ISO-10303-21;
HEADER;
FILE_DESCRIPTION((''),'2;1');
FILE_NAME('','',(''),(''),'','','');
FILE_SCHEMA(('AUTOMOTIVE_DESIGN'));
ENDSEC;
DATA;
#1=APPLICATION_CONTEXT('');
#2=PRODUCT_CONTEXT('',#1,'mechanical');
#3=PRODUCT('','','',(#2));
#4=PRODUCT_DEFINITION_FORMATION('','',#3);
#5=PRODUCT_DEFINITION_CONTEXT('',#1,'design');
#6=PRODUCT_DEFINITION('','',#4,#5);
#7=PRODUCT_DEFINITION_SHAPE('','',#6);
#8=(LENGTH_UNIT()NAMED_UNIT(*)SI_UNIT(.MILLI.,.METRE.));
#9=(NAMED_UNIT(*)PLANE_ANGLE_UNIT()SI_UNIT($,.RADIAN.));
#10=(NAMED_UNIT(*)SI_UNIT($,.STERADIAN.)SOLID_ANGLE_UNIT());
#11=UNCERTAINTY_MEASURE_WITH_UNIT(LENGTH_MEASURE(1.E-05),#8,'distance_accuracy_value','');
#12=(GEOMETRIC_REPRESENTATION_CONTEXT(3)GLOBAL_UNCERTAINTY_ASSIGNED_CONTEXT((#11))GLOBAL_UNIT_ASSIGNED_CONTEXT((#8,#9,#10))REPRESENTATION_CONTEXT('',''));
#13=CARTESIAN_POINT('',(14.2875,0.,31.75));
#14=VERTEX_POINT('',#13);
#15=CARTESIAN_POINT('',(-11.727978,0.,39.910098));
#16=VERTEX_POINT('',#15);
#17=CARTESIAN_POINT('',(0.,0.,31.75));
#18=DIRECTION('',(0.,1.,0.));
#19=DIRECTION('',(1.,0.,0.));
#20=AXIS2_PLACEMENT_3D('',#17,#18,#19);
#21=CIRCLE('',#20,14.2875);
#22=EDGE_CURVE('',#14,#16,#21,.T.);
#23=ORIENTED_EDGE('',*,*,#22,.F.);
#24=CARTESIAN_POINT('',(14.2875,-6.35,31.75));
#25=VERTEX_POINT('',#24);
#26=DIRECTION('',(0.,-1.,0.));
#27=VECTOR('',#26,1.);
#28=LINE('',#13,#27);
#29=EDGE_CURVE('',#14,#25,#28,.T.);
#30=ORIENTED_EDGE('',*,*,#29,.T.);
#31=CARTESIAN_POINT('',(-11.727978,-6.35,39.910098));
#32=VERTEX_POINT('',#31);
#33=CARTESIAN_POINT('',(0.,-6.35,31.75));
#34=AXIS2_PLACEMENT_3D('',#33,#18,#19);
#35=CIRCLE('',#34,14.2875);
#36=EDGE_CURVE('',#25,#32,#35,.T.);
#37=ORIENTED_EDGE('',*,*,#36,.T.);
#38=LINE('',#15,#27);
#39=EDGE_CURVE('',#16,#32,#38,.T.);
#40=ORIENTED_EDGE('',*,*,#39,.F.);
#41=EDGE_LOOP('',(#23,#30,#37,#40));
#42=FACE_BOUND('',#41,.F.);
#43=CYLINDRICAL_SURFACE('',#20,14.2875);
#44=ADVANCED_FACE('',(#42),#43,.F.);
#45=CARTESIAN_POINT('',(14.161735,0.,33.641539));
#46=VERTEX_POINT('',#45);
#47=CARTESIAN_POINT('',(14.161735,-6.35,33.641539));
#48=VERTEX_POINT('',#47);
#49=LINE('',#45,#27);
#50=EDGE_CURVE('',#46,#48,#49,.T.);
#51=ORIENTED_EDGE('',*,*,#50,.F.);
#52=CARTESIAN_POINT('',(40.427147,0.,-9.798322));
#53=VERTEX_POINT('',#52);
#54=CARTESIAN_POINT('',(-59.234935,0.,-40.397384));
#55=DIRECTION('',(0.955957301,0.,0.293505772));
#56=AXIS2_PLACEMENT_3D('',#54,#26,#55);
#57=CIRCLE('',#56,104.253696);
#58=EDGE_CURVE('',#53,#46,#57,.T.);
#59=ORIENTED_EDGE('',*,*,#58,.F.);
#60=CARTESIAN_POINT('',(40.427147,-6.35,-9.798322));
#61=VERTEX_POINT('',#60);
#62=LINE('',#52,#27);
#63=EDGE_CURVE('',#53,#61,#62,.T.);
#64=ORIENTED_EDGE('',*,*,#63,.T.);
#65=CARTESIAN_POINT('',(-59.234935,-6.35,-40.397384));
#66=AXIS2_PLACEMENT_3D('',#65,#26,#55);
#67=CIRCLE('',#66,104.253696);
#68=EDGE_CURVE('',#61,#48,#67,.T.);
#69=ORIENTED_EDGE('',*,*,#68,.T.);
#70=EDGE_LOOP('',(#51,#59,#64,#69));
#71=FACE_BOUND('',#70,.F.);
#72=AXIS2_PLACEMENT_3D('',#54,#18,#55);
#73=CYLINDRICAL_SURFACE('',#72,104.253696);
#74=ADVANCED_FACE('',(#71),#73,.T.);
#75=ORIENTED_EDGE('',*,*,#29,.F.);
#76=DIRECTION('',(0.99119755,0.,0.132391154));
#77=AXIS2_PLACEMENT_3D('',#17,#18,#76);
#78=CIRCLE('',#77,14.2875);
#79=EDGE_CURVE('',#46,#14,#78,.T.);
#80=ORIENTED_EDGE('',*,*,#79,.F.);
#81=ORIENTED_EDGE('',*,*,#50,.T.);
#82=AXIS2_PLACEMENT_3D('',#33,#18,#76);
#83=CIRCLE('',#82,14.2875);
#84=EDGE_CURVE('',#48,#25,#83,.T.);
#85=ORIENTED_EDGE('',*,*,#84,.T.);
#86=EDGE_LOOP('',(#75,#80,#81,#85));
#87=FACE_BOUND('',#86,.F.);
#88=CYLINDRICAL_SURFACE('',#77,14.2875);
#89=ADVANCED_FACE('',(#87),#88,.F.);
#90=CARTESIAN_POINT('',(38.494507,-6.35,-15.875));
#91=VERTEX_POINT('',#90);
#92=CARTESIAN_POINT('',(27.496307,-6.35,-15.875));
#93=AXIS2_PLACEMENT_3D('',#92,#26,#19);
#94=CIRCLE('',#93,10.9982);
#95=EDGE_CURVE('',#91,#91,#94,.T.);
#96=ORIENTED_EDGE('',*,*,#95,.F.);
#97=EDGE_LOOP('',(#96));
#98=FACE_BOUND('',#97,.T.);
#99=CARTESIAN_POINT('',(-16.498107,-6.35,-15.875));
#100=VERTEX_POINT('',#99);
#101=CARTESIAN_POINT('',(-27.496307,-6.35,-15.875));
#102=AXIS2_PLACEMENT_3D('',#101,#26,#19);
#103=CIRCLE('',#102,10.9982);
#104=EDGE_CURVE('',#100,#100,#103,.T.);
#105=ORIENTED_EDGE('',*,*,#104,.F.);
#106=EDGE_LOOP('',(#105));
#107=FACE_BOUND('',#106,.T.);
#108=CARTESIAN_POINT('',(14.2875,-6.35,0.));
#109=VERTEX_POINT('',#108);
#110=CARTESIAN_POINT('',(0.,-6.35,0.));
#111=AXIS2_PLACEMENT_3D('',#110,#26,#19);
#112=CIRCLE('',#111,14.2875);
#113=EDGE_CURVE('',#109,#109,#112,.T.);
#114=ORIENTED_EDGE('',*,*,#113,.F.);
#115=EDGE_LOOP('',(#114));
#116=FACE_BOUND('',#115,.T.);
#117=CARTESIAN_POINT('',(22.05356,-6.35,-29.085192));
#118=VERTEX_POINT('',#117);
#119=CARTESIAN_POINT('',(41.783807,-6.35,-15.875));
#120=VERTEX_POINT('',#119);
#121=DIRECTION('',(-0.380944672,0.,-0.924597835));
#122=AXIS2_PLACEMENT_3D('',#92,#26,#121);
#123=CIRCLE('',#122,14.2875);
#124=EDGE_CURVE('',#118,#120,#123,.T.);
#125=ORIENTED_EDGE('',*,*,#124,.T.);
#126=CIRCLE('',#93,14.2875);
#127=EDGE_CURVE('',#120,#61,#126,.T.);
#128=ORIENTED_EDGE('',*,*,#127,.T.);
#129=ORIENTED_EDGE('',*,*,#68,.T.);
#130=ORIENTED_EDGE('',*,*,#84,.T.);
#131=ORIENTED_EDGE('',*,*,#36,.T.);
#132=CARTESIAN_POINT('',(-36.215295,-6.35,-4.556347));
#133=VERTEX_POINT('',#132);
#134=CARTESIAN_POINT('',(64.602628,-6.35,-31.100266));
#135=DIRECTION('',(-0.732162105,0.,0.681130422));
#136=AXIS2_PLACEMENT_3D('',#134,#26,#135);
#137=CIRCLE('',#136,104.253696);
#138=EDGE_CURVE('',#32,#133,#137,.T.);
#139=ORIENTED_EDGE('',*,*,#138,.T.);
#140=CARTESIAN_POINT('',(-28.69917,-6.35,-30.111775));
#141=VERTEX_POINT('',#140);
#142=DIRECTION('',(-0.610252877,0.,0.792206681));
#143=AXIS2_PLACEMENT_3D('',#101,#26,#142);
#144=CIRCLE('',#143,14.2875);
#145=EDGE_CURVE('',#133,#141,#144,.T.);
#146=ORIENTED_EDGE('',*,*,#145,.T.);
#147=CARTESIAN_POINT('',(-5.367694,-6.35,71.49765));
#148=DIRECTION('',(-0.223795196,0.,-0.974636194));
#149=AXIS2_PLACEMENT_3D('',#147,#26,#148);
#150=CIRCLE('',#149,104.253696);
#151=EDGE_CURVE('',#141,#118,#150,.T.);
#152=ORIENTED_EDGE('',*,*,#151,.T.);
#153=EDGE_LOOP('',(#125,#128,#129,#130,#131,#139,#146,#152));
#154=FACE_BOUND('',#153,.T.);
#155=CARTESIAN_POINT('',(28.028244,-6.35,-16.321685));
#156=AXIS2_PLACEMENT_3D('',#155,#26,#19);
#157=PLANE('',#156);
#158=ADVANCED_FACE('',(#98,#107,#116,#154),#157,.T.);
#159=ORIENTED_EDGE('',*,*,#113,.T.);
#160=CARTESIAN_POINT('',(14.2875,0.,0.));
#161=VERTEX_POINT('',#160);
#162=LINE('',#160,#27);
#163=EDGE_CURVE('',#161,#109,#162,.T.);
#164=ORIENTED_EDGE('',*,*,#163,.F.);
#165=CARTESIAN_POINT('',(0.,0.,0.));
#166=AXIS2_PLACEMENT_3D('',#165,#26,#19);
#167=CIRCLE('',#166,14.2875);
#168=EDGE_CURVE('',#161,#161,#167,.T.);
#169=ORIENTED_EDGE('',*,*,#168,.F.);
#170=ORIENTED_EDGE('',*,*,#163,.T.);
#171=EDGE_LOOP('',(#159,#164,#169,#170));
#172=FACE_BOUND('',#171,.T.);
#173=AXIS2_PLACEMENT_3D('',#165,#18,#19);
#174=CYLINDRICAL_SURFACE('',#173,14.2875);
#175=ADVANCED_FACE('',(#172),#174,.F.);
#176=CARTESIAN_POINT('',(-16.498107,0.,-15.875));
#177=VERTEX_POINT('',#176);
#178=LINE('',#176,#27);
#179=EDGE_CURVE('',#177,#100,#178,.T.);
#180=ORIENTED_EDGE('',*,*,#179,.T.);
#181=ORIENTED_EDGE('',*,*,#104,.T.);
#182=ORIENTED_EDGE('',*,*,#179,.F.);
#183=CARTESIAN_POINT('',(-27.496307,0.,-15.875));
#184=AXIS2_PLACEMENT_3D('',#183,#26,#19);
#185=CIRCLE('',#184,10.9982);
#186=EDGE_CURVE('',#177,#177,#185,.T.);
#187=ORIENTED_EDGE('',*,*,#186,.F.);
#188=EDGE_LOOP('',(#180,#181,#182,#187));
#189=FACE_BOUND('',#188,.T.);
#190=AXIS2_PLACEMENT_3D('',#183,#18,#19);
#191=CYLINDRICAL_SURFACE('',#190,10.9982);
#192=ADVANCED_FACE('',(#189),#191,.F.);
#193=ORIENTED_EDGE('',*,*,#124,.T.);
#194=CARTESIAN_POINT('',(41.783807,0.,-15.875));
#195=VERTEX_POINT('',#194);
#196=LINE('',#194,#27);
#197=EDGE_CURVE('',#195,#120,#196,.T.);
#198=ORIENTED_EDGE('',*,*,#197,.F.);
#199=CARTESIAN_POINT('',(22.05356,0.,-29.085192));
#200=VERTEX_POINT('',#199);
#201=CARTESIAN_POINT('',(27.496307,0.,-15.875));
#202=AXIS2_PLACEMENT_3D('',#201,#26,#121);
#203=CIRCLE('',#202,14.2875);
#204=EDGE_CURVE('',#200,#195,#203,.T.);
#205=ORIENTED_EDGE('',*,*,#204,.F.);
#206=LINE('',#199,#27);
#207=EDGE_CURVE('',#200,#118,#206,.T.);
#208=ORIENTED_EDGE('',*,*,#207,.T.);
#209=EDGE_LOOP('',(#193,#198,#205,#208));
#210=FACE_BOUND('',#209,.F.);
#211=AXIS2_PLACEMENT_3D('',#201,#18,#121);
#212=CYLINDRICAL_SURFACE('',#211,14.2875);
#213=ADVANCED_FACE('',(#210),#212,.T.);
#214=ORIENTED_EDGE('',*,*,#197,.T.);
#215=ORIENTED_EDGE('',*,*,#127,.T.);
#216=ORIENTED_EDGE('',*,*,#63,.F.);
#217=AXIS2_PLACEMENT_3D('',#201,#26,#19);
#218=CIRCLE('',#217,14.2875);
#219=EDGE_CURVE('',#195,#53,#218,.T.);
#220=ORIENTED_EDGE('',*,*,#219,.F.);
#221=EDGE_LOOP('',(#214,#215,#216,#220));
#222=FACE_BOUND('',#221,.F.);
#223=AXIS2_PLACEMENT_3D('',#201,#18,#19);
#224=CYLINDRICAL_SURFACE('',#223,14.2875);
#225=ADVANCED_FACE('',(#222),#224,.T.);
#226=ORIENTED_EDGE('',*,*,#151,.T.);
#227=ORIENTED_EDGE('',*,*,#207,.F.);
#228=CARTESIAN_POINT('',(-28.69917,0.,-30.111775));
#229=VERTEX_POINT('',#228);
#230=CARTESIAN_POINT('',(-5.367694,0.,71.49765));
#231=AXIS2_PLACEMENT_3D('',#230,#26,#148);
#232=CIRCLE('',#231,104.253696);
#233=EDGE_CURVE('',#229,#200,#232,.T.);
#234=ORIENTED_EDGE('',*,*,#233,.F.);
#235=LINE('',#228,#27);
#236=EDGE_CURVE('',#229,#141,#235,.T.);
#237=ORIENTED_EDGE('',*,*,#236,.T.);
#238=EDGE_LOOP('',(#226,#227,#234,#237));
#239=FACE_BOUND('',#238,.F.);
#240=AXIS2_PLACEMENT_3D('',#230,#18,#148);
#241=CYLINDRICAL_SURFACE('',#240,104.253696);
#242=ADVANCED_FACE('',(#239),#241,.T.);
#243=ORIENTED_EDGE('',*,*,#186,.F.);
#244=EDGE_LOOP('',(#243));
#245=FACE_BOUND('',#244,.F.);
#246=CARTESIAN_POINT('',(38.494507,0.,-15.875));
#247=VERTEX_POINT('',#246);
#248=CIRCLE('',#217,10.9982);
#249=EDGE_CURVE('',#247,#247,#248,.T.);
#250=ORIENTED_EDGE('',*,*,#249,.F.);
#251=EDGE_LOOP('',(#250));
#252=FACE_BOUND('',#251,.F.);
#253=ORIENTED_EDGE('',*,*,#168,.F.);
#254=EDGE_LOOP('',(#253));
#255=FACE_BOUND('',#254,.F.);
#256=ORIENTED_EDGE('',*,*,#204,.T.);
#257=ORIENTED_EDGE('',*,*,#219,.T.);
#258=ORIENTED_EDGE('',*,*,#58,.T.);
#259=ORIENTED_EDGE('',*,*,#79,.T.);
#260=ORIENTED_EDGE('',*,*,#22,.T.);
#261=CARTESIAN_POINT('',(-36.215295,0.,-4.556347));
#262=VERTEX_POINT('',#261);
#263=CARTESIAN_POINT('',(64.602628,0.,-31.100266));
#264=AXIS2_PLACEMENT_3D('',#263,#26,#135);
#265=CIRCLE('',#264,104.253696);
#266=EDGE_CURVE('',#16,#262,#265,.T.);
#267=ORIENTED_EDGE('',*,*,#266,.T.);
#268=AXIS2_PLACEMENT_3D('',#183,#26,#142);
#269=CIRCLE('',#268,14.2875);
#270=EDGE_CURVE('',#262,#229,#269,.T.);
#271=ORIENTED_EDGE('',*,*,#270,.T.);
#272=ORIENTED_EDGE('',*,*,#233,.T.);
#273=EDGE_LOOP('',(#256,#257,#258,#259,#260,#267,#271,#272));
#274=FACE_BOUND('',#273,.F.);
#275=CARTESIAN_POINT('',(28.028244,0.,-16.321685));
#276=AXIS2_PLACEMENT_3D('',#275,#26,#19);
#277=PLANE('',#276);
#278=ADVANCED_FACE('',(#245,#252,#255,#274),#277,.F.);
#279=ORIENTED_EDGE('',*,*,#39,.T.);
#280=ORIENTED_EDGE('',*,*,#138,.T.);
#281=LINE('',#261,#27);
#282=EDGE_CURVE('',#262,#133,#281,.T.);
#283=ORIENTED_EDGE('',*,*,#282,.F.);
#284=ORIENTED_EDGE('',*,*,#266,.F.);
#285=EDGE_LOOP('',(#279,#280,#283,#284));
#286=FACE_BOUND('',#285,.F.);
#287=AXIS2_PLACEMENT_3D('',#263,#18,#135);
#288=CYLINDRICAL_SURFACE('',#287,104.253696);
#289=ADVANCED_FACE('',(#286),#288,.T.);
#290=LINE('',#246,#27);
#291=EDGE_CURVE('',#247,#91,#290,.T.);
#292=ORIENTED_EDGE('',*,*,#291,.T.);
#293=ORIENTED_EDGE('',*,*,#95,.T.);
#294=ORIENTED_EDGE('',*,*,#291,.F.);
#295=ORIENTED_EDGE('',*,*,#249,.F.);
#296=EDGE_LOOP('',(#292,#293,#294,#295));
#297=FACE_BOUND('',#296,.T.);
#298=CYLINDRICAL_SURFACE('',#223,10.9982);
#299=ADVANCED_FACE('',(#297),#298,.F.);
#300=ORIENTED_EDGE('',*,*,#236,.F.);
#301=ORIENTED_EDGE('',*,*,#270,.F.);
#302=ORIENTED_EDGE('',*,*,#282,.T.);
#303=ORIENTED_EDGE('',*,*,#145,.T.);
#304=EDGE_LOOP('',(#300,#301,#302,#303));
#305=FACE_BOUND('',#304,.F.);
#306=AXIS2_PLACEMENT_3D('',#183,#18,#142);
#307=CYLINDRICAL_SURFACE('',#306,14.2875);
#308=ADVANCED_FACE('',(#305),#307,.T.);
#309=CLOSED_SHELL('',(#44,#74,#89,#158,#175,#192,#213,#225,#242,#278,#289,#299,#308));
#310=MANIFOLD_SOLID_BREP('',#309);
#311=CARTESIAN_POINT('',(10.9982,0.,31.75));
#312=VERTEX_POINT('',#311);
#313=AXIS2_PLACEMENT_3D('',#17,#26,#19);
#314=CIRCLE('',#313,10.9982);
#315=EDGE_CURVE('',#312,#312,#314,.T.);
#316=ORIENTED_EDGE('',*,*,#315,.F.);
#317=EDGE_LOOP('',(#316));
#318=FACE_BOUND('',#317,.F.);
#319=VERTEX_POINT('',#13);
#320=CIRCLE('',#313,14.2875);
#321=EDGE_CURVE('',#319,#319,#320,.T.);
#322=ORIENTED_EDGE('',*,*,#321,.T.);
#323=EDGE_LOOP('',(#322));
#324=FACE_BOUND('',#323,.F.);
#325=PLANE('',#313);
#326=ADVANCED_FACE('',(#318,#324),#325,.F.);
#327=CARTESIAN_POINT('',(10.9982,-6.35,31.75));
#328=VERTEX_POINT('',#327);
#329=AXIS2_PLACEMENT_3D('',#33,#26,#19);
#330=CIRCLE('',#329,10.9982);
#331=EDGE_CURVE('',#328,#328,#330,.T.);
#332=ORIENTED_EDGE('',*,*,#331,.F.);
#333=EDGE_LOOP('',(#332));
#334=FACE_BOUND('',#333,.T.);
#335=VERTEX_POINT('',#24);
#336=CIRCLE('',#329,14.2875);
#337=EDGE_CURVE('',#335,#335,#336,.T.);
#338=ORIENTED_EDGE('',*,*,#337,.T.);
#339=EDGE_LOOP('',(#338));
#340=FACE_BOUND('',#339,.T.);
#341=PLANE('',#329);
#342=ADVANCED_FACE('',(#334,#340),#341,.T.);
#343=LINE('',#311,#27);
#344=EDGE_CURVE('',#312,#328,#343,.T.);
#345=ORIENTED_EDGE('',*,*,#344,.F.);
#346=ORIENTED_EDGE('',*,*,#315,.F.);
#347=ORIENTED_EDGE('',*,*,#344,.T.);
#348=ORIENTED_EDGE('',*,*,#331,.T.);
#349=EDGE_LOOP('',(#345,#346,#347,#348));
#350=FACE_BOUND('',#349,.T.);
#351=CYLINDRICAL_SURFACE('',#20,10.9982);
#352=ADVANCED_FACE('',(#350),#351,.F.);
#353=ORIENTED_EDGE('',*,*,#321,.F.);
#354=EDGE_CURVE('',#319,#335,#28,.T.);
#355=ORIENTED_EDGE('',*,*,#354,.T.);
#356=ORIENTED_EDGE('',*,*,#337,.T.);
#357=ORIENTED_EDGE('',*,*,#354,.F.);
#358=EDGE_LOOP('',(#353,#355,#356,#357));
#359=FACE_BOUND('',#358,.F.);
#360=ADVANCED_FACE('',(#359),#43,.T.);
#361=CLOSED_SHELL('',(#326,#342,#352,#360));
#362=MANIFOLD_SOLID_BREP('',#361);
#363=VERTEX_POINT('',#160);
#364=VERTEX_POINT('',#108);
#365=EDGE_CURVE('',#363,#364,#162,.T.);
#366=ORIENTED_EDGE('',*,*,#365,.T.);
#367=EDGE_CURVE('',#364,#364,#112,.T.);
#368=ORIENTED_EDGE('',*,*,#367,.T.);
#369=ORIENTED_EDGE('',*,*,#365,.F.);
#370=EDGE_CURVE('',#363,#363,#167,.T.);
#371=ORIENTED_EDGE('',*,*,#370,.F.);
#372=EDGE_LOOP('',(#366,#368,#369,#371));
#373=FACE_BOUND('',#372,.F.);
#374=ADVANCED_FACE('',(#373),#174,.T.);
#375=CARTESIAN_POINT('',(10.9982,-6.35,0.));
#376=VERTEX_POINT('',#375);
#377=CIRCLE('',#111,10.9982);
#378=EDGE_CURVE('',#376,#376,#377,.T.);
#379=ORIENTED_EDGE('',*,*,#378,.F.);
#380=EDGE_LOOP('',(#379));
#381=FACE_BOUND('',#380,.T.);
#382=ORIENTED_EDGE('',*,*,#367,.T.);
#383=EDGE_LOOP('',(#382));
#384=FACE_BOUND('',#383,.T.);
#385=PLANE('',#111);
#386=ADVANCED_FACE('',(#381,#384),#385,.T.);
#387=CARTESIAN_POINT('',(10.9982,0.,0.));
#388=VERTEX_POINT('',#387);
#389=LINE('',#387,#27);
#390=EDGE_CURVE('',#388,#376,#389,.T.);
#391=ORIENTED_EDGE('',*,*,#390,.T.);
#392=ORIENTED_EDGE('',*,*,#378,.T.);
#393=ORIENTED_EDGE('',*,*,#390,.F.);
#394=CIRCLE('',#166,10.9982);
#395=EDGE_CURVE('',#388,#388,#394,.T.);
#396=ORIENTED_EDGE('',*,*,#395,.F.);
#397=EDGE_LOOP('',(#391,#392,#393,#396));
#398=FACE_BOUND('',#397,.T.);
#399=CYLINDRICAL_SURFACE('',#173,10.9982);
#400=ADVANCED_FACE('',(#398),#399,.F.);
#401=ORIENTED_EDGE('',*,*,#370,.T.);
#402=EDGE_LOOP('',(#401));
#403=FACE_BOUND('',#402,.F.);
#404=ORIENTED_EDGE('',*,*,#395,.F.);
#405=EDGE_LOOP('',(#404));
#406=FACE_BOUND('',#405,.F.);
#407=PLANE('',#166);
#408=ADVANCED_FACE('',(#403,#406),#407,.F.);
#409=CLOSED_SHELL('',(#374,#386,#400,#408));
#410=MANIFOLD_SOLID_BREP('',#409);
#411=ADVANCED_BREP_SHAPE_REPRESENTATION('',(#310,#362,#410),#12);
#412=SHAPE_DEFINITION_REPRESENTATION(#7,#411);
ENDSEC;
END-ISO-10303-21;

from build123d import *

# Parameters (mm, degrees)
F0_R     = 14.2875
F0_R_2   = 10.9982
F2_DEPTH = 6.35
F1_R     = 10.9982
F1_R_2   = 14.2875


with BuildPart() as f2:
    # F0 (on Front) → F2 (new body)
    with BuildSketch(Plane.XZ):
        with Locations((0, 31.75)):
            Circle(F0_R)
        with Locations((0, 31.75)):
            Circle(F0_R_2, mode=Mode.SUBTRACT)
    extrude(amount=F2_DEPTH)


with BuildPart() as f2b:
    # F0 (on Front) → F2, piece 2 (new body)
    with BuildSketch(Plane.XZ):
        Circle(F0_R)
        Circle(F0_R_2, mode=Mode.SUBTRACT)
    extrude(amount=F2_DEPTH)


with BuildPart() as f2c:
    # F1 (on face) → F2, piece 3 (new body)
    with BuildSketch(Plane.XZ):
        with BuildLine():
            ThreePointArc((41.7838065702, -15.875), (41.4405176602, -12.7618611777), (40.4271474867, -9.7983224999))
            ThreePointArc((40.4271474867, -9.7983224999), (17.1515631107, -6.0201058347), (22.0535595667, -29.0851915696))
            ThreePointArc((22.0535595667, -29.0851915696), (35.4451872599, -27.7471502699), (41.7838065702, -15.875))
        make_face()
        with Locations((27.4963065702, -15.875)):
            Circle(F1_R, mode=Mode.SUBTRACT)
        with BuildLine():
            ThreePointArc((-13.2088065702, -15.875), (-21.1891631837, -3.0549922561), (-36.2152945566, -4.5563470438))
            ThreePointArc((-36.2152945566, -4.5563470438), (-41.2032669986, -19.9063635489), (-28.6991699428, -30.1117754761))
            ThreePointArc((-28.6991699428, -30.1117754761), (-17.8281437195, -26.3944716285), (-13.2088065702, -15.875))
        make_face()
        with Locations((-27.4963065702, -15.875)):
            Circle(F1_R, mode=Mode.SUBTRACT)
        with BuildLine():
            ThreePointArc((14.1617349899, 33.6415386135), (14.2560240761, 32.697857474), (14.2875, 31.75))
            ThreePointArc((14.2875, 31.75), (-4.2760482393, 18.1173895491), (-11.727977544, 39.910097976))
            ThreePointArc((-11.727977544, 39.910097976), (-26.7194199084, 19.1900581454), (-36.2152945566, -4.5563470438))
            ThreePointArc((-36.2152945566, -4.5563470438), (-21.1891631837, -3.0549922561), (-13.2088065702, -15.875))
            ThreePointArc((-13.2088065702, -15.875), (-17.8281437195, -26.3944716285), (-28.6991699428, -30.1117754761))
            ThreePointArc((-28.6991699428, -30.1117754761), (-3.2593678998, -32.7347254878), (22.0535595667, -29.0851915696))
            ThreePointArc((22.0535595667, -29.0851915696), (17.1515631107, -6.0201058347), (40.4271474867, -9.7983224999))
            ThreePointArc((40.4271474867, -9.7983224999), (29.9787878083, 13.5446673424), (14.1617349899, 33.6415386135))
        make_face()
        Circle(F1_R_2, mode=Mode.SUBTRACT)
    extrude(amount=F2_DEPTH)


solid = Compound([f2.part, f2b.part, f2c.part])
